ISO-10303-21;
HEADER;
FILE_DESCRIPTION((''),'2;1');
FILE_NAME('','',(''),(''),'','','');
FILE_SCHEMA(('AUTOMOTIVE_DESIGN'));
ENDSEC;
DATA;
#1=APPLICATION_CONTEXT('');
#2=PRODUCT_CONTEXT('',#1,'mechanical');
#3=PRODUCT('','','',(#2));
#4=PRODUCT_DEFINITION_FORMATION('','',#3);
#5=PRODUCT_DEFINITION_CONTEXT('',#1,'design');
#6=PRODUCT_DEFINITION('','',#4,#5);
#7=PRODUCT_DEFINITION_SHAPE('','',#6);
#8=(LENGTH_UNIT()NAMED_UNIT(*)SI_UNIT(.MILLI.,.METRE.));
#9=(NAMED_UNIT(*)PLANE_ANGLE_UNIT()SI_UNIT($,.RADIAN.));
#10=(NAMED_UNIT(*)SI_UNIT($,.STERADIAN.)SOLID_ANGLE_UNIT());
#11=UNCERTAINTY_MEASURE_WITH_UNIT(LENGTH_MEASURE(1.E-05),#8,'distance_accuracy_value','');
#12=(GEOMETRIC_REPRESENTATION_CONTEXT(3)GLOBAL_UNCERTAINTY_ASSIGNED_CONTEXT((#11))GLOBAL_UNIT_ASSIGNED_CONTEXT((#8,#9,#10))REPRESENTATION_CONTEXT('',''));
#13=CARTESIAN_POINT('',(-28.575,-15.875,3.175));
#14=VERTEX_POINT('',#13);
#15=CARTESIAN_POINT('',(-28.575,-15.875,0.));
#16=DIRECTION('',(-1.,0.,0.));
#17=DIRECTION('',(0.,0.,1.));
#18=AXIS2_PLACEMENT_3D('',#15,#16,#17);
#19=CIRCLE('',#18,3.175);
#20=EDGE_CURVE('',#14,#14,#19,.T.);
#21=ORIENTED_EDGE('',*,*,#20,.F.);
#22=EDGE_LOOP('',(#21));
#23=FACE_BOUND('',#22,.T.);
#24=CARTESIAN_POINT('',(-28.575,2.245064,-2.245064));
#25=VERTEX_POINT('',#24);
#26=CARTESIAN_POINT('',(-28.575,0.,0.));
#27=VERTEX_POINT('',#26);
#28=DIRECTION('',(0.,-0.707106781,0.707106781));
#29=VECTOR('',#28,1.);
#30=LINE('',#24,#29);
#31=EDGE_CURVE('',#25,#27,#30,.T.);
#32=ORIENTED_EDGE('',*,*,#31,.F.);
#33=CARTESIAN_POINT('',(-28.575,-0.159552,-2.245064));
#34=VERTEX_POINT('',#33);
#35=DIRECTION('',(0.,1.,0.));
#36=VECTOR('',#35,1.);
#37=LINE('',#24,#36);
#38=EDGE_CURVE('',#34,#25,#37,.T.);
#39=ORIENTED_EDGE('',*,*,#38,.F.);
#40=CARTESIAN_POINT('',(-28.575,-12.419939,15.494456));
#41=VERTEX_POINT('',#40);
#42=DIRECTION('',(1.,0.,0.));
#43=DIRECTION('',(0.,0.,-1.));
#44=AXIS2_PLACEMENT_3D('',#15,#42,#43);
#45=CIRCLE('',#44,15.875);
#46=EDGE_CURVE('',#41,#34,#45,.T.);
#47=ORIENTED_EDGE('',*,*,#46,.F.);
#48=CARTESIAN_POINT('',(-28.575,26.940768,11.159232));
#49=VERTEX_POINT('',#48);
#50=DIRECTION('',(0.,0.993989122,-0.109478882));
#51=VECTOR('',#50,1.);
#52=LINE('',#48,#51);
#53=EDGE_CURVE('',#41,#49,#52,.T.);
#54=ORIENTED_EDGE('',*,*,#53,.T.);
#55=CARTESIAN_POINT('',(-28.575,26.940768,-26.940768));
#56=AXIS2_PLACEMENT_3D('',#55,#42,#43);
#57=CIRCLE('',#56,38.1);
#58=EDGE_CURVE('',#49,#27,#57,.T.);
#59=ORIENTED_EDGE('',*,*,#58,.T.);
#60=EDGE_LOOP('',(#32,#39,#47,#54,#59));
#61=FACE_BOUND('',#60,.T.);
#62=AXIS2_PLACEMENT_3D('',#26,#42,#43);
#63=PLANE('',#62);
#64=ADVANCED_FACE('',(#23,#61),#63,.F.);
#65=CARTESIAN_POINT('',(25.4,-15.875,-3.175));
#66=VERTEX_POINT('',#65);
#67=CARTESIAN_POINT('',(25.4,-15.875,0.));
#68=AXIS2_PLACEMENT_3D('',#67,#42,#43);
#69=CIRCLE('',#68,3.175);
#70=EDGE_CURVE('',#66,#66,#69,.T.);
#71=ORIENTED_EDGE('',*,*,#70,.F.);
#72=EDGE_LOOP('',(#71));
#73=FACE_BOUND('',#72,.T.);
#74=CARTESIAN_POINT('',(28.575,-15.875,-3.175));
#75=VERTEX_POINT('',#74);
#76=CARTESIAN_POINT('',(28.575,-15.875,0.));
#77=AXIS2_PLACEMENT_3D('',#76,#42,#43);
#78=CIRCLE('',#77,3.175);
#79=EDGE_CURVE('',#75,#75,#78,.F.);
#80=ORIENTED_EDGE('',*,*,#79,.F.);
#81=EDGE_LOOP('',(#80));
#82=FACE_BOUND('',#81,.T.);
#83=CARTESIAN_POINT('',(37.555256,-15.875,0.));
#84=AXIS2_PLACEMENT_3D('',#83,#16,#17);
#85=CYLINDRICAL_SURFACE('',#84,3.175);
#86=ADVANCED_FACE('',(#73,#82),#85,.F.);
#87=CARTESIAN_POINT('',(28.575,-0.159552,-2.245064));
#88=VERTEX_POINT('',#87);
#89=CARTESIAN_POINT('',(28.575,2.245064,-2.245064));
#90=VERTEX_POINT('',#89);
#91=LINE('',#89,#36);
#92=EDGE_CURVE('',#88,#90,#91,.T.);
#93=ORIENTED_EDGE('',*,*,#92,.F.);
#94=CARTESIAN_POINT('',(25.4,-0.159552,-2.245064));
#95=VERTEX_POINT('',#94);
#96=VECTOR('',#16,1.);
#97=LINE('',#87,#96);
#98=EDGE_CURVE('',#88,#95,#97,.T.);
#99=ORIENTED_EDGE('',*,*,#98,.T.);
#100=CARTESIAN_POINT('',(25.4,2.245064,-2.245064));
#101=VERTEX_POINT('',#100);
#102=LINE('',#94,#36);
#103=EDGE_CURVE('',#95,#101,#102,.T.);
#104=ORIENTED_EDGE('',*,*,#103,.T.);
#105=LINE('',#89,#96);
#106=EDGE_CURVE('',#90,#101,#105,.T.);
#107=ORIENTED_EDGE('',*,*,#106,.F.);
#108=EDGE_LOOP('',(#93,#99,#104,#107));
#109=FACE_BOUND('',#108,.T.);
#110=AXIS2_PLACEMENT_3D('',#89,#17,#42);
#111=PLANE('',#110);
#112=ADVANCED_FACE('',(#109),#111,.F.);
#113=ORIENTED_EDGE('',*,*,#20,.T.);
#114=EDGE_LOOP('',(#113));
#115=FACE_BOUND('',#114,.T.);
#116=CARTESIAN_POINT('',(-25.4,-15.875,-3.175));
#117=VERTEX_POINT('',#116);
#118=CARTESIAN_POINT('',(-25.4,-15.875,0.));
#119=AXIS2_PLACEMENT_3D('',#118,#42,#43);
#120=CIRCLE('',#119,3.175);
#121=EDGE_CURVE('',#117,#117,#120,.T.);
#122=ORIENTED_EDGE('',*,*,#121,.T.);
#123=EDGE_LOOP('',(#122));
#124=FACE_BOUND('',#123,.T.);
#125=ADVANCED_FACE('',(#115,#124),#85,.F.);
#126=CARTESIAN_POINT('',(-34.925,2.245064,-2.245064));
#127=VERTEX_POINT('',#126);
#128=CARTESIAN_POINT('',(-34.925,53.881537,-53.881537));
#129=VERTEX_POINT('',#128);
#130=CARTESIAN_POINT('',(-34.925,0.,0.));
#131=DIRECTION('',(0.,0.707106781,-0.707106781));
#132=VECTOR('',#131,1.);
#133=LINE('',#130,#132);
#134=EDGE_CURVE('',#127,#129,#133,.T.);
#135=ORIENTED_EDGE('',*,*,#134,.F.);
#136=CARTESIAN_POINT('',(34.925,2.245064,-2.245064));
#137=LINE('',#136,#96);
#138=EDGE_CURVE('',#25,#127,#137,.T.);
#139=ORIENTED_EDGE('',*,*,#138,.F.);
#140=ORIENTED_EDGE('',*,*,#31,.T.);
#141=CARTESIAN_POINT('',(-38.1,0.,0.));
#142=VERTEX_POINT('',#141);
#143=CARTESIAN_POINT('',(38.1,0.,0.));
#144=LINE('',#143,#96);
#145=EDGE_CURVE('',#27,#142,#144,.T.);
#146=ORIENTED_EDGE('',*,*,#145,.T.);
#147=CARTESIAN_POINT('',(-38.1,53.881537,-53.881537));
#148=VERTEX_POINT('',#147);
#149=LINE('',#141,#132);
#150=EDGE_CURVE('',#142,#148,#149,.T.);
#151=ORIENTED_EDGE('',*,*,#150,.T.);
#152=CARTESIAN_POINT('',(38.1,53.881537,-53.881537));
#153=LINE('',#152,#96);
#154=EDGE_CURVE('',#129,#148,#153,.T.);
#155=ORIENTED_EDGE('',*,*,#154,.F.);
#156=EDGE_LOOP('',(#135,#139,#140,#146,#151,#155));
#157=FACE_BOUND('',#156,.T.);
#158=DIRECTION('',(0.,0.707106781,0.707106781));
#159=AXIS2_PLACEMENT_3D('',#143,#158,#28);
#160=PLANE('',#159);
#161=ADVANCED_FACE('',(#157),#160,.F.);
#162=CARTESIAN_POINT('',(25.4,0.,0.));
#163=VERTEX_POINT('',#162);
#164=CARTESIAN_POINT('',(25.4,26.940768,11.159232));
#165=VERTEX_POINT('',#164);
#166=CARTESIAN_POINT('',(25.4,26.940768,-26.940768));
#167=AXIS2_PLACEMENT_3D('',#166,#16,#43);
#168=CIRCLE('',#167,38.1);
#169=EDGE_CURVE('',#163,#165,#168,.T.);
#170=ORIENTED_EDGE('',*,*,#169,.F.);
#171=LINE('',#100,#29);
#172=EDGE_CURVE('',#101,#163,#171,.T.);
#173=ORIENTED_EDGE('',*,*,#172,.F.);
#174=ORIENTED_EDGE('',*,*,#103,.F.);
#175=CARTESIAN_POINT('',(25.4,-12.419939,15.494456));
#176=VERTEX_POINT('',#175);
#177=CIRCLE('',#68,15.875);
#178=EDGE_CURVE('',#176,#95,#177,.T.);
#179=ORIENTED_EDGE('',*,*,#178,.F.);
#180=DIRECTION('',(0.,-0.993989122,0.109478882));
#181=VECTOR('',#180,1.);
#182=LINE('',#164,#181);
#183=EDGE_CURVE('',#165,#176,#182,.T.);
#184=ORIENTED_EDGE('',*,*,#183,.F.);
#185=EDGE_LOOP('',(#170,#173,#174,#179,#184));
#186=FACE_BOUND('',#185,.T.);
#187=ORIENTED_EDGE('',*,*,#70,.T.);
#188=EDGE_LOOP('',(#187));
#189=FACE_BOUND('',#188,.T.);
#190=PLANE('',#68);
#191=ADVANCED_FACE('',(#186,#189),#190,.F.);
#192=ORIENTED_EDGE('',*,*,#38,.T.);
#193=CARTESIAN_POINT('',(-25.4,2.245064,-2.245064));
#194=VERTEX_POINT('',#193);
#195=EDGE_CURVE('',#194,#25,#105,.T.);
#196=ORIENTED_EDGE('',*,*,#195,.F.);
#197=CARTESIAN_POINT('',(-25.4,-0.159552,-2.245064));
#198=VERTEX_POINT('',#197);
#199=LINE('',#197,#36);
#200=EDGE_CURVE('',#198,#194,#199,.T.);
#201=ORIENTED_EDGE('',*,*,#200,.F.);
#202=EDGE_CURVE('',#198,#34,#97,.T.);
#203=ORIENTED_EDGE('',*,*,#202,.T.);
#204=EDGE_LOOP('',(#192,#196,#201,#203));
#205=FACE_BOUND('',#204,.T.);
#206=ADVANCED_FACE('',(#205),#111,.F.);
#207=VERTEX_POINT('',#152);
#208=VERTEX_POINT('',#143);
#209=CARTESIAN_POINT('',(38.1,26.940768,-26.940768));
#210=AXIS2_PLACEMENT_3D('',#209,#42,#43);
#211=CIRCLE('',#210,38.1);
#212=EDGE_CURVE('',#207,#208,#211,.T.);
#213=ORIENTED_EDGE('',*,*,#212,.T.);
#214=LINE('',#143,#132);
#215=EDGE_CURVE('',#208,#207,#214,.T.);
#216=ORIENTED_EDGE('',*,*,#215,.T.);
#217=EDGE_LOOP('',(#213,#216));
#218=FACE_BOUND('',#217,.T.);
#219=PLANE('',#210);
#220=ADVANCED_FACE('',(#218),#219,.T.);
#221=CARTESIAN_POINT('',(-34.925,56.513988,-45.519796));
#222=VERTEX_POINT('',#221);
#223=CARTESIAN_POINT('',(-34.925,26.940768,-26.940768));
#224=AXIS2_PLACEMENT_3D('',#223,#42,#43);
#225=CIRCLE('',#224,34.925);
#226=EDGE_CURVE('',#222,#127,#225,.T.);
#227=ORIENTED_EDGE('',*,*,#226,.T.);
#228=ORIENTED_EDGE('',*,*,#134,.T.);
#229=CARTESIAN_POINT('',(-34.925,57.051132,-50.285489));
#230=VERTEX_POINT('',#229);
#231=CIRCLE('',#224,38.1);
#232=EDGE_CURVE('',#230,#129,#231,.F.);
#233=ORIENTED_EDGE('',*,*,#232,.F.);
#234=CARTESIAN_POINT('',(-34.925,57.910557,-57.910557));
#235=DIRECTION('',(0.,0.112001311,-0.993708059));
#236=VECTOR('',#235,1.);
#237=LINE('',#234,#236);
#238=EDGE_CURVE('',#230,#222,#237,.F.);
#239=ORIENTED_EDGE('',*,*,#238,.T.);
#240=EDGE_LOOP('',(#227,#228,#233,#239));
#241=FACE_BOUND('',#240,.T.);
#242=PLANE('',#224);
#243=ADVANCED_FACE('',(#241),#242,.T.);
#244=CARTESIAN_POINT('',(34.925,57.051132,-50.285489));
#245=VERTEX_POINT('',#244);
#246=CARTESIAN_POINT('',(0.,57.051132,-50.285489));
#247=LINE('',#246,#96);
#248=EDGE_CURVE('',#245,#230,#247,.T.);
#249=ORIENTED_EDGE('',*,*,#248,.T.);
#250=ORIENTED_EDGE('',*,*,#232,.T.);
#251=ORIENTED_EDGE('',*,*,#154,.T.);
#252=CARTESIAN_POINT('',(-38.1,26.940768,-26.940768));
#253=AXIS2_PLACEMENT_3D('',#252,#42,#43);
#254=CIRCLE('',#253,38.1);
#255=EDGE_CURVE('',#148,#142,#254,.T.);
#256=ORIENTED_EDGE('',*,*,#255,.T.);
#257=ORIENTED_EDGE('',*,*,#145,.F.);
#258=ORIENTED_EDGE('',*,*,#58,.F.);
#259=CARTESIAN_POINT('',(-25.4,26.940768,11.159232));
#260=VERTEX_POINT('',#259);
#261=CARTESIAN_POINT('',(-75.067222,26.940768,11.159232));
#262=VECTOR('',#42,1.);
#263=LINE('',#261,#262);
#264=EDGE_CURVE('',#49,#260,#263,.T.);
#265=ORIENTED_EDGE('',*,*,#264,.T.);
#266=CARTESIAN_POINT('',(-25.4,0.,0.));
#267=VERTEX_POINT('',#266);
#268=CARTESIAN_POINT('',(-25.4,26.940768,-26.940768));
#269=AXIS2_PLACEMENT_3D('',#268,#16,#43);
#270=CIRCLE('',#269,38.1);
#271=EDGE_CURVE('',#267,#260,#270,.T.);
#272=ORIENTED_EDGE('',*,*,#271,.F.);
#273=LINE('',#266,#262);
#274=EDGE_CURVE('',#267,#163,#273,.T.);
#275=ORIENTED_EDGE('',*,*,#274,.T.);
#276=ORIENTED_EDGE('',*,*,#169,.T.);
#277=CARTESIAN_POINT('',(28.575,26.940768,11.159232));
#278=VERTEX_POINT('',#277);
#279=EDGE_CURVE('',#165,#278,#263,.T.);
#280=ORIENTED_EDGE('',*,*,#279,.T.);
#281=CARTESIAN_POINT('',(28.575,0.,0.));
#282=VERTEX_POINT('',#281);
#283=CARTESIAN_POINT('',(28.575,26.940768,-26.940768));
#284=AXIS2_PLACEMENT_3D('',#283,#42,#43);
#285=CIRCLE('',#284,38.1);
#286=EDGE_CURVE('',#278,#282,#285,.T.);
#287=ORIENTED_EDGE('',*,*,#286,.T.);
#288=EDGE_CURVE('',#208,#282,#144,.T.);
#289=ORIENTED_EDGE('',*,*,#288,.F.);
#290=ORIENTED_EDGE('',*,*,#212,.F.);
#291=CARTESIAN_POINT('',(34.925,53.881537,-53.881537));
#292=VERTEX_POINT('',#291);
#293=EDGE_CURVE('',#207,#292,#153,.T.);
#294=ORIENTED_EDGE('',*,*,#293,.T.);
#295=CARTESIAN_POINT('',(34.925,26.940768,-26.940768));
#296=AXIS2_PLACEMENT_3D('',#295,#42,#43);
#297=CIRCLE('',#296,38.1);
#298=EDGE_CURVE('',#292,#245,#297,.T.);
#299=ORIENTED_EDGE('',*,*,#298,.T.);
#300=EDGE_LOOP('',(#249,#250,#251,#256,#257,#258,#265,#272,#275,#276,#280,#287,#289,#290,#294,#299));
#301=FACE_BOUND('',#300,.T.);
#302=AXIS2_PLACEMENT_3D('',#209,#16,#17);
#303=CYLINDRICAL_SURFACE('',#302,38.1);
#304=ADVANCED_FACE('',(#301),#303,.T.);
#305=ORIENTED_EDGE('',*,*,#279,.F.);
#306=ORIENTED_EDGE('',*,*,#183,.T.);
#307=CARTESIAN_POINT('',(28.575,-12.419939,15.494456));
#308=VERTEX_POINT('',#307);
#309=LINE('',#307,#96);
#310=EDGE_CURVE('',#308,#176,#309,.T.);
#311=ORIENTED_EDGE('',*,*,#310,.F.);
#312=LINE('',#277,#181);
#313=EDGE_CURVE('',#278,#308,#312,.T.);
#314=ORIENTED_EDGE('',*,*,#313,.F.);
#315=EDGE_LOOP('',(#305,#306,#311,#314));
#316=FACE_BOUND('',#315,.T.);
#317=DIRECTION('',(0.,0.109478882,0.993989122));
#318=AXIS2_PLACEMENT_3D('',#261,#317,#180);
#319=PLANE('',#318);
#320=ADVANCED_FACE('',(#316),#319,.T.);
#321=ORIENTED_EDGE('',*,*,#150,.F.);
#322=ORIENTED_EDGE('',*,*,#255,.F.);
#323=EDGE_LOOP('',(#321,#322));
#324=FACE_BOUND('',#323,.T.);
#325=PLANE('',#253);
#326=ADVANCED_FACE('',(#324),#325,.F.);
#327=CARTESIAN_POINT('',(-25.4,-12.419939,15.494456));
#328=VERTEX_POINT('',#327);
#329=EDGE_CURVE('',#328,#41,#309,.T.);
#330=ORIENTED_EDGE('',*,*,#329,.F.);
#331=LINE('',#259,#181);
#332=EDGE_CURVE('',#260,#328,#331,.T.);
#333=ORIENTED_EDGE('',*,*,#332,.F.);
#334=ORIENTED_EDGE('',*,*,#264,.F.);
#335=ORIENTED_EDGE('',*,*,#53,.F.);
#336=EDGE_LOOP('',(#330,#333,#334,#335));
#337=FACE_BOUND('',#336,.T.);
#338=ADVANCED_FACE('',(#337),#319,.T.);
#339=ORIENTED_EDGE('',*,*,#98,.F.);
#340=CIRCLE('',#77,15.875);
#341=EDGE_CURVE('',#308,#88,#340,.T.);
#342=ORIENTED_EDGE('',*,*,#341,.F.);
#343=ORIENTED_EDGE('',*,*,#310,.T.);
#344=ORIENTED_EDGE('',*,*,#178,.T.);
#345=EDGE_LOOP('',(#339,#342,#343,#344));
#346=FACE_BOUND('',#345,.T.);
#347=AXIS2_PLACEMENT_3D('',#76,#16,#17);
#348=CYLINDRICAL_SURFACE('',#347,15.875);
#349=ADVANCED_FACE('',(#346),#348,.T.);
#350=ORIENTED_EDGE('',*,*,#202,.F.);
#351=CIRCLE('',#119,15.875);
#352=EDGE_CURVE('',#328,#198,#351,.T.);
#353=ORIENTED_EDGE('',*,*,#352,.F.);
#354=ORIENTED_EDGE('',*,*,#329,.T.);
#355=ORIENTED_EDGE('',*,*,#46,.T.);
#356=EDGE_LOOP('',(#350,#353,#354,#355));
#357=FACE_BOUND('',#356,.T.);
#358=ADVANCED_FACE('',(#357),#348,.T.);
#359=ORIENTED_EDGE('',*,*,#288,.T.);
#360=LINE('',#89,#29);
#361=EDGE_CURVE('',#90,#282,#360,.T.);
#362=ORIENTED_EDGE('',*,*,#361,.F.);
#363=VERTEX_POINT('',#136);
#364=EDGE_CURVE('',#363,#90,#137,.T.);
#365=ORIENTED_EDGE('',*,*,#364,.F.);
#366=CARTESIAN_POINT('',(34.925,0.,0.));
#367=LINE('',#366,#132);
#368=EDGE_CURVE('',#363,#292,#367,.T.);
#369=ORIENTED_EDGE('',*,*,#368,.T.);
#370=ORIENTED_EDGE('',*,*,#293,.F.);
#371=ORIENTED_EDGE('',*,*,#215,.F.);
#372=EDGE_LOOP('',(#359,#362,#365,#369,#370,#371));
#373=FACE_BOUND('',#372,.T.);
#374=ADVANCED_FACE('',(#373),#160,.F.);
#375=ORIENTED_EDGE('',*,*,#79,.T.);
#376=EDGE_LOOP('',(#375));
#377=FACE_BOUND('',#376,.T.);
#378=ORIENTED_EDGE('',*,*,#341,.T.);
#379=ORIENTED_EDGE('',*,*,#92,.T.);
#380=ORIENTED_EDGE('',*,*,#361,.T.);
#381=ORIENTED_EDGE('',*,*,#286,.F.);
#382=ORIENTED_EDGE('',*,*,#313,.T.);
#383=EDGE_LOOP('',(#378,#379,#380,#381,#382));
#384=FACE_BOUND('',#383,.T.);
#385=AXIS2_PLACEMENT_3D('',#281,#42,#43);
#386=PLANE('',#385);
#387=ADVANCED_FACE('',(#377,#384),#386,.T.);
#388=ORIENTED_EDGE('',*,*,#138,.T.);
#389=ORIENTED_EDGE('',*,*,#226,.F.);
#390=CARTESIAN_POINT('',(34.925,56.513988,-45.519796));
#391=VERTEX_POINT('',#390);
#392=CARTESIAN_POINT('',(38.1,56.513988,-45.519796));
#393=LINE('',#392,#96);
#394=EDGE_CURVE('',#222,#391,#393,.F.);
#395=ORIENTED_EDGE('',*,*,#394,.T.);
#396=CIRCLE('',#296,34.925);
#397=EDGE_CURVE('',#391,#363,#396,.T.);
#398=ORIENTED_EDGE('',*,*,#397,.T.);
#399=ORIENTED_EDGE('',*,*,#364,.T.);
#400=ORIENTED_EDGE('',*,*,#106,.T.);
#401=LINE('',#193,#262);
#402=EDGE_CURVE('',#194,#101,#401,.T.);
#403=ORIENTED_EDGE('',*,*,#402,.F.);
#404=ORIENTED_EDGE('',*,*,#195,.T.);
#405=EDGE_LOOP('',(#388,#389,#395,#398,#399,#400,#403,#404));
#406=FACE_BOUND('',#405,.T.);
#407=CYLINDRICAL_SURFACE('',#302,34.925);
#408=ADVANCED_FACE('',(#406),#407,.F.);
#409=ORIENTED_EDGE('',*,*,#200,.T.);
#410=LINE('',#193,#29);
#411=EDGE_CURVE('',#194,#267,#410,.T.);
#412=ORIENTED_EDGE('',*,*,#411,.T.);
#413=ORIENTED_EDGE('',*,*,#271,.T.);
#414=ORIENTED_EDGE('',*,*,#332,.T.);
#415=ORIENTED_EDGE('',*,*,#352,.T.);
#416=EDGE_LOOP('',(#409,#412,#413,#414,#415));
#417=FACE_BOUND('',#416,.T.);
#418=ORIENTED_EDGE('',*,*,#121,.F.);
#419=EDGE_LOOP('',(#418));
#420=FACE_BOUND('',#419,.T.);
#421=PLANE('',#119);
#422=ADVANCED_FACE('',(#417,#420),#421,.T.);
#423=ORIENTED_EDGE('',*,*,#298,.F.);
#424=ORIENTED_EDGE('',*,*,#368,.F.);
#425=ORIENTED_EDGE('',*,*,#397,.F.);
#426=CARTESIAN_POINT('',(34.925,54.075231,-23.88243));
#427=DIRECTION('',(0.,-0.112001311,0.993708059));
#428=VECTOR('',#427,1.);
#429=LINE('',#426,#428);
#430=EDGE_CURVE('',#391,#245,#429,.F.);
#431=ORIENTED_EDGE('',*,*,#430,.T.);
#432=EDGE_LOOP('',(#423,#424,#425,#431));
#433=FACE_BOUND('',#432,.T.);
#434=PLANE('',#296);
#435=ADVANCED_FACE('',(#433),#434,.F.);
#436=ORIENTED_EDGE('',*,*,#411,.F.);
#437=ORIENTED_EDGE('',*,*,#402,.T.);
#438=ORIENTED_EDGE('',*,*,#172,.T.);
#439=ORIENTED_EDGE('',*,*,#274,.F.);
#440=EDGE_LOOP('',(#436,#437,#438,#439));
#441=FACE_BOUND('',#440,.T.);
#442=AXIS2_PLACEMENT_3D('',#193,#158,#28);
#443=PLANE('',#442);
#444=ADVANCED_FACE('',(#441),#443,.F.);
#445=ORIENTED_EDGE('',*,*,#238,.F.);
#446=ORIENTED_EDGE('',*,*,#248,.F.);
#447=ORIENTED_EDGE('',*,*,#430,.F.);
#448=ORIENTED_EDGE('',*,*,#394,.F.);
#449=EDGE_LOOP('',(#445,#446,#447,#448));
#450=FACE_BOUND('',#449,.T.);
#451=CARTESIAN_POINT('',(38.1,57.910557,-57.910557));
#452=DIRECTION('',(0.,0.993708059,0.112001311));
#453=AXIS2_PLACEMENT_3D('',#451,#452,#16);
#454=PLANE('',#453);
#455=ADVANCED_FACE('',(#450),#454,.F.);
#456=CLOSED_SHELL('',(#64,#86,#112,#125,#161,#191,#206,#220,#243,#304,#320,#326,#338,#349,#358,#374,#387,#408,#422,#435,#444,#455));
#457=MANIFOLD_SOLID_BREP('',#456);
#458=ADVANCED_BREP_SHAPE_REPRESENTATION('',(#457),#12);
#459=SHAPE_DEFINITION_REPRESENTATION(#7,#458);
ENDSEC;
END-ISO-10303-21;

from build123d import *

# Parameters (mm, degrees)
BOSS_EXTRUDE1_DEPTH = 38.1
SHELL1_T            = -3.175
SKETCH4_R           = 15.875
BOSS_EXTRUDE3_DEPTH = 28.575
BOSS_EXTRUDE4_DEPTH = 28.575
SKETCH6_R           = 15.875
CUT_EXTRUDE2_DEPTH  = 25.4
CUT_EXTRUDE3_START  = 25.4
SKETCH6_2_R         = 15.875
CUT_EXTRUDE3_DEPTH  = 25.4
CUT_EXTRUDE4_REACH  = 109.606
SKETCH7_R           = 3.175
BOSS_EXTRUDE5_REACH = 109.606
CUT_EXTRUDE5_DEPTH  = 25.4


with BuildPart() as part:
    # Sketch2 → Boss-Extrude1 (new, symmetric)
    with BuildSketch(Plane(origin=(0, 0, 0), x_dir=(0, 0, -1), z_dir=(1, 0, 0))):
        with BuildLine():
            Line((0, 0), (53.881536726, 53.881536726))
            ThreePointArc((53.881536726, 53.881536726), (0, 53.881536726), (0, 0))
        make_face()
    extrude(amount=BOSS_EXTRUDE1_DEPTH, both=True)

    # Shell1
    shell1_openings = [part.faces().sort_by_distance(p)[0] for p in [
        (0, 26.940768363, -26.940768363),
    ]]
    offset(amount=SHELL1_T, openings=shell1_openings)

    # Chamfer1
    # the kernel refuses this chamfer: 10 mm, written as the material it takes off along each edge
    with BuildSketch(Plane(origin=(34.925, 51.636472696, -51.636472696), x_dir=(0, 0.6876558872178, -0.726036762688158), z_dir=(-1, 0, 0))) as chamfer1_piece_1:
        with BuildLine():
            Line((8.869626963, -0.240804851), (-1.086879529, -7.747424349))
            ThreePointArc((-1.086879529, -7.747424349), (-0.345966855, -4.045712731), (0, 0))
            Line((0, 0), (8.869626963, -0.240804851))
        make_face()
    extrude(amount=69.85, mode=Mode.SUBTRACT)



with BuildPart() as body_2:
    # Sketch4 → Boss-Extrude3 (new, symmetric)
    with BuildSketch(Plane(origin=(0, 0, 0), x_dir=(0, 0, -1), z_dir=(1, 0, 0))):
        with Locations((0, -15.875)):
            Circle(SKETCH4_R)
    extrude(amount=BOSS_EXTRUDE3_DEPTH, both=True)


with BuildPart() as part_1:
    add(part.part)

    add(body_2.part)  # Boss-Extrude4 merges body 2
    # Sketch5 → Boss-Extrude4 (add, symmetric)
    with BuildSketch(Plane(origin=(0, 0, 0), x_dir=(0, 0, -1), z_dir=(1, 0, 0))):
        Polygon((2.24506403, 2.24506403), (2.24506403, -0.159551788), (0, 0), align=None)
    extrude(amount=BOSS_EXTRUDE4_DEPTH, both=True)

    # Sketch6 → Cut-Extrude2 (cut)
    with BuildSketch(Plane(origin=(0, 0, 0), x_dir=(0, 0, -1), z_dir=(1, 0, 0))):
        with Locations((0, -15.875)):
            Circle(SKETCH6_R)
    extrude(amount=-CUT_EXTRUDE2_DEPTH, mode=Mode.SUBTRACT)

    # Sketch6<2> → Cut-Extrude3 (cut)
    with BuildSketch(Plane(origin=(0, 0, 0), x_dir=(0, 0, -1), z_dir=(1, 0, 0)).offset(CUT_EXTRUDE3_START)):
        with Locations((0, -15.875)):
            Circle(SKETCH6_2_R)
    extrude(amount=-CUT_EXTRUDE3_DEPTH, mode=Mode.SUBTRACT)

    # Cut-Extrude4: up to this face of the body (flat: up to its plane)
    cut_extrude4_end = Plane(part_1.part.faces().sort_by_distance((28.575, -15.819887854, -0.005001009))[0])
    # Sketch7 → Cut-Extrude4 (cut, up to the picked face)
    with BuildSketch(Plane.ZY.offset(28.575), mode=Mode.PRIVATE) as cut_extrude4_sk1:
        with Locations(Location((0, -15.875, 0), (0, 0, 180))):
            Circle(SKETCH7_R)
    cut_extrude4_tool1 = split(extrude(cut_extrude4_sk1.sketch, amount=-CUT_EXTRUDE4_REACH, mode=Mode.PRIVATE), bisect_by=cut_extrude4_end, keep=Keep.BOTH, mode=Mode.PRIVATE)
    add(cut_extrude4_tool1.solids().sort_by(Axis((-28.575, -15.875, 0), (1, 0, 0)))[0], mode=Mode.SUBTRACT)

    # Boss-Extrude5: up to this face of the body (flat: up to its plane)
    boss_extrude5_end = Plane(part_1.part.faces().sort_by_distance((-28.575, 0.79361509, -1.451448941))[0])
    # Sketch8 → Boss-Extrude5 (add, up to the picked face)
    with BuildSketch(Plane(origin=(28.575, 0, 0), x_dir=(0, 0, -1), z_dir=(1, 0, 0)), mode=Mode.PRIVATE) as boss_extrude5_sk1:
        with BuildLine():
            Line((-11.159231637, 26.940768363), (-15.875, -15.875))
            Line((-15.875, -15.875), (2.24506403, 2.24506403))
            ThreePointArc((2.24506403, 2.24506403), (-3.75420071, 10.280201189), (-7.223023717, 19.688807544))
            Line((-7.223023717, 19.688807544), (-11.159231637, 26.940768363))
        make_face()
    boss_extrude5_tool1 = split(extrude(boss_extrude5_sk1.sketch, amount=-BOSS_EXTRUDE5_REACH, mode=Mode.PRIVATE), bisect_by=boss_extrude5_end, keep=Keep.BOTH, mode=Mode.PRIVATE)
    add(boss_extrude5_tool1.solids().sort_by(Axis((28.575, 4.070009, 8.572047), (-1, 0, 0)))[0])

    # Sketch9 → Cut-Extrude5 (cut, symmetric)
    with BuildSketch(Plane(origin=(0, 0, 0), x_dir=(0, 0, -1), z_dir=(1, 0, 0))):
        with BuildLine():
            Line((2.24506403, -0.159551788), (2.24506403, 2.24506403))
            Line((2.24506403, 2.24506403), (0, 0))
            ThreePointArc((0, 0), (-8.259041825, 12.36052959), (-11.159231637, 26.940768363))
            Line((-11.159231637, 26.940768363), (-15.494456387, -12.419939034))
            ThreePointArc((-15.494456387, -12.419939034), (9.025844742, -28.934469809), (2.24506403, -0.159551788))
        make_face()
    extrude(amount=CUT_EXTRUDE5_DEPTH, both=True, mode=Mode.SUBTRACT)


solid = part_1.part
